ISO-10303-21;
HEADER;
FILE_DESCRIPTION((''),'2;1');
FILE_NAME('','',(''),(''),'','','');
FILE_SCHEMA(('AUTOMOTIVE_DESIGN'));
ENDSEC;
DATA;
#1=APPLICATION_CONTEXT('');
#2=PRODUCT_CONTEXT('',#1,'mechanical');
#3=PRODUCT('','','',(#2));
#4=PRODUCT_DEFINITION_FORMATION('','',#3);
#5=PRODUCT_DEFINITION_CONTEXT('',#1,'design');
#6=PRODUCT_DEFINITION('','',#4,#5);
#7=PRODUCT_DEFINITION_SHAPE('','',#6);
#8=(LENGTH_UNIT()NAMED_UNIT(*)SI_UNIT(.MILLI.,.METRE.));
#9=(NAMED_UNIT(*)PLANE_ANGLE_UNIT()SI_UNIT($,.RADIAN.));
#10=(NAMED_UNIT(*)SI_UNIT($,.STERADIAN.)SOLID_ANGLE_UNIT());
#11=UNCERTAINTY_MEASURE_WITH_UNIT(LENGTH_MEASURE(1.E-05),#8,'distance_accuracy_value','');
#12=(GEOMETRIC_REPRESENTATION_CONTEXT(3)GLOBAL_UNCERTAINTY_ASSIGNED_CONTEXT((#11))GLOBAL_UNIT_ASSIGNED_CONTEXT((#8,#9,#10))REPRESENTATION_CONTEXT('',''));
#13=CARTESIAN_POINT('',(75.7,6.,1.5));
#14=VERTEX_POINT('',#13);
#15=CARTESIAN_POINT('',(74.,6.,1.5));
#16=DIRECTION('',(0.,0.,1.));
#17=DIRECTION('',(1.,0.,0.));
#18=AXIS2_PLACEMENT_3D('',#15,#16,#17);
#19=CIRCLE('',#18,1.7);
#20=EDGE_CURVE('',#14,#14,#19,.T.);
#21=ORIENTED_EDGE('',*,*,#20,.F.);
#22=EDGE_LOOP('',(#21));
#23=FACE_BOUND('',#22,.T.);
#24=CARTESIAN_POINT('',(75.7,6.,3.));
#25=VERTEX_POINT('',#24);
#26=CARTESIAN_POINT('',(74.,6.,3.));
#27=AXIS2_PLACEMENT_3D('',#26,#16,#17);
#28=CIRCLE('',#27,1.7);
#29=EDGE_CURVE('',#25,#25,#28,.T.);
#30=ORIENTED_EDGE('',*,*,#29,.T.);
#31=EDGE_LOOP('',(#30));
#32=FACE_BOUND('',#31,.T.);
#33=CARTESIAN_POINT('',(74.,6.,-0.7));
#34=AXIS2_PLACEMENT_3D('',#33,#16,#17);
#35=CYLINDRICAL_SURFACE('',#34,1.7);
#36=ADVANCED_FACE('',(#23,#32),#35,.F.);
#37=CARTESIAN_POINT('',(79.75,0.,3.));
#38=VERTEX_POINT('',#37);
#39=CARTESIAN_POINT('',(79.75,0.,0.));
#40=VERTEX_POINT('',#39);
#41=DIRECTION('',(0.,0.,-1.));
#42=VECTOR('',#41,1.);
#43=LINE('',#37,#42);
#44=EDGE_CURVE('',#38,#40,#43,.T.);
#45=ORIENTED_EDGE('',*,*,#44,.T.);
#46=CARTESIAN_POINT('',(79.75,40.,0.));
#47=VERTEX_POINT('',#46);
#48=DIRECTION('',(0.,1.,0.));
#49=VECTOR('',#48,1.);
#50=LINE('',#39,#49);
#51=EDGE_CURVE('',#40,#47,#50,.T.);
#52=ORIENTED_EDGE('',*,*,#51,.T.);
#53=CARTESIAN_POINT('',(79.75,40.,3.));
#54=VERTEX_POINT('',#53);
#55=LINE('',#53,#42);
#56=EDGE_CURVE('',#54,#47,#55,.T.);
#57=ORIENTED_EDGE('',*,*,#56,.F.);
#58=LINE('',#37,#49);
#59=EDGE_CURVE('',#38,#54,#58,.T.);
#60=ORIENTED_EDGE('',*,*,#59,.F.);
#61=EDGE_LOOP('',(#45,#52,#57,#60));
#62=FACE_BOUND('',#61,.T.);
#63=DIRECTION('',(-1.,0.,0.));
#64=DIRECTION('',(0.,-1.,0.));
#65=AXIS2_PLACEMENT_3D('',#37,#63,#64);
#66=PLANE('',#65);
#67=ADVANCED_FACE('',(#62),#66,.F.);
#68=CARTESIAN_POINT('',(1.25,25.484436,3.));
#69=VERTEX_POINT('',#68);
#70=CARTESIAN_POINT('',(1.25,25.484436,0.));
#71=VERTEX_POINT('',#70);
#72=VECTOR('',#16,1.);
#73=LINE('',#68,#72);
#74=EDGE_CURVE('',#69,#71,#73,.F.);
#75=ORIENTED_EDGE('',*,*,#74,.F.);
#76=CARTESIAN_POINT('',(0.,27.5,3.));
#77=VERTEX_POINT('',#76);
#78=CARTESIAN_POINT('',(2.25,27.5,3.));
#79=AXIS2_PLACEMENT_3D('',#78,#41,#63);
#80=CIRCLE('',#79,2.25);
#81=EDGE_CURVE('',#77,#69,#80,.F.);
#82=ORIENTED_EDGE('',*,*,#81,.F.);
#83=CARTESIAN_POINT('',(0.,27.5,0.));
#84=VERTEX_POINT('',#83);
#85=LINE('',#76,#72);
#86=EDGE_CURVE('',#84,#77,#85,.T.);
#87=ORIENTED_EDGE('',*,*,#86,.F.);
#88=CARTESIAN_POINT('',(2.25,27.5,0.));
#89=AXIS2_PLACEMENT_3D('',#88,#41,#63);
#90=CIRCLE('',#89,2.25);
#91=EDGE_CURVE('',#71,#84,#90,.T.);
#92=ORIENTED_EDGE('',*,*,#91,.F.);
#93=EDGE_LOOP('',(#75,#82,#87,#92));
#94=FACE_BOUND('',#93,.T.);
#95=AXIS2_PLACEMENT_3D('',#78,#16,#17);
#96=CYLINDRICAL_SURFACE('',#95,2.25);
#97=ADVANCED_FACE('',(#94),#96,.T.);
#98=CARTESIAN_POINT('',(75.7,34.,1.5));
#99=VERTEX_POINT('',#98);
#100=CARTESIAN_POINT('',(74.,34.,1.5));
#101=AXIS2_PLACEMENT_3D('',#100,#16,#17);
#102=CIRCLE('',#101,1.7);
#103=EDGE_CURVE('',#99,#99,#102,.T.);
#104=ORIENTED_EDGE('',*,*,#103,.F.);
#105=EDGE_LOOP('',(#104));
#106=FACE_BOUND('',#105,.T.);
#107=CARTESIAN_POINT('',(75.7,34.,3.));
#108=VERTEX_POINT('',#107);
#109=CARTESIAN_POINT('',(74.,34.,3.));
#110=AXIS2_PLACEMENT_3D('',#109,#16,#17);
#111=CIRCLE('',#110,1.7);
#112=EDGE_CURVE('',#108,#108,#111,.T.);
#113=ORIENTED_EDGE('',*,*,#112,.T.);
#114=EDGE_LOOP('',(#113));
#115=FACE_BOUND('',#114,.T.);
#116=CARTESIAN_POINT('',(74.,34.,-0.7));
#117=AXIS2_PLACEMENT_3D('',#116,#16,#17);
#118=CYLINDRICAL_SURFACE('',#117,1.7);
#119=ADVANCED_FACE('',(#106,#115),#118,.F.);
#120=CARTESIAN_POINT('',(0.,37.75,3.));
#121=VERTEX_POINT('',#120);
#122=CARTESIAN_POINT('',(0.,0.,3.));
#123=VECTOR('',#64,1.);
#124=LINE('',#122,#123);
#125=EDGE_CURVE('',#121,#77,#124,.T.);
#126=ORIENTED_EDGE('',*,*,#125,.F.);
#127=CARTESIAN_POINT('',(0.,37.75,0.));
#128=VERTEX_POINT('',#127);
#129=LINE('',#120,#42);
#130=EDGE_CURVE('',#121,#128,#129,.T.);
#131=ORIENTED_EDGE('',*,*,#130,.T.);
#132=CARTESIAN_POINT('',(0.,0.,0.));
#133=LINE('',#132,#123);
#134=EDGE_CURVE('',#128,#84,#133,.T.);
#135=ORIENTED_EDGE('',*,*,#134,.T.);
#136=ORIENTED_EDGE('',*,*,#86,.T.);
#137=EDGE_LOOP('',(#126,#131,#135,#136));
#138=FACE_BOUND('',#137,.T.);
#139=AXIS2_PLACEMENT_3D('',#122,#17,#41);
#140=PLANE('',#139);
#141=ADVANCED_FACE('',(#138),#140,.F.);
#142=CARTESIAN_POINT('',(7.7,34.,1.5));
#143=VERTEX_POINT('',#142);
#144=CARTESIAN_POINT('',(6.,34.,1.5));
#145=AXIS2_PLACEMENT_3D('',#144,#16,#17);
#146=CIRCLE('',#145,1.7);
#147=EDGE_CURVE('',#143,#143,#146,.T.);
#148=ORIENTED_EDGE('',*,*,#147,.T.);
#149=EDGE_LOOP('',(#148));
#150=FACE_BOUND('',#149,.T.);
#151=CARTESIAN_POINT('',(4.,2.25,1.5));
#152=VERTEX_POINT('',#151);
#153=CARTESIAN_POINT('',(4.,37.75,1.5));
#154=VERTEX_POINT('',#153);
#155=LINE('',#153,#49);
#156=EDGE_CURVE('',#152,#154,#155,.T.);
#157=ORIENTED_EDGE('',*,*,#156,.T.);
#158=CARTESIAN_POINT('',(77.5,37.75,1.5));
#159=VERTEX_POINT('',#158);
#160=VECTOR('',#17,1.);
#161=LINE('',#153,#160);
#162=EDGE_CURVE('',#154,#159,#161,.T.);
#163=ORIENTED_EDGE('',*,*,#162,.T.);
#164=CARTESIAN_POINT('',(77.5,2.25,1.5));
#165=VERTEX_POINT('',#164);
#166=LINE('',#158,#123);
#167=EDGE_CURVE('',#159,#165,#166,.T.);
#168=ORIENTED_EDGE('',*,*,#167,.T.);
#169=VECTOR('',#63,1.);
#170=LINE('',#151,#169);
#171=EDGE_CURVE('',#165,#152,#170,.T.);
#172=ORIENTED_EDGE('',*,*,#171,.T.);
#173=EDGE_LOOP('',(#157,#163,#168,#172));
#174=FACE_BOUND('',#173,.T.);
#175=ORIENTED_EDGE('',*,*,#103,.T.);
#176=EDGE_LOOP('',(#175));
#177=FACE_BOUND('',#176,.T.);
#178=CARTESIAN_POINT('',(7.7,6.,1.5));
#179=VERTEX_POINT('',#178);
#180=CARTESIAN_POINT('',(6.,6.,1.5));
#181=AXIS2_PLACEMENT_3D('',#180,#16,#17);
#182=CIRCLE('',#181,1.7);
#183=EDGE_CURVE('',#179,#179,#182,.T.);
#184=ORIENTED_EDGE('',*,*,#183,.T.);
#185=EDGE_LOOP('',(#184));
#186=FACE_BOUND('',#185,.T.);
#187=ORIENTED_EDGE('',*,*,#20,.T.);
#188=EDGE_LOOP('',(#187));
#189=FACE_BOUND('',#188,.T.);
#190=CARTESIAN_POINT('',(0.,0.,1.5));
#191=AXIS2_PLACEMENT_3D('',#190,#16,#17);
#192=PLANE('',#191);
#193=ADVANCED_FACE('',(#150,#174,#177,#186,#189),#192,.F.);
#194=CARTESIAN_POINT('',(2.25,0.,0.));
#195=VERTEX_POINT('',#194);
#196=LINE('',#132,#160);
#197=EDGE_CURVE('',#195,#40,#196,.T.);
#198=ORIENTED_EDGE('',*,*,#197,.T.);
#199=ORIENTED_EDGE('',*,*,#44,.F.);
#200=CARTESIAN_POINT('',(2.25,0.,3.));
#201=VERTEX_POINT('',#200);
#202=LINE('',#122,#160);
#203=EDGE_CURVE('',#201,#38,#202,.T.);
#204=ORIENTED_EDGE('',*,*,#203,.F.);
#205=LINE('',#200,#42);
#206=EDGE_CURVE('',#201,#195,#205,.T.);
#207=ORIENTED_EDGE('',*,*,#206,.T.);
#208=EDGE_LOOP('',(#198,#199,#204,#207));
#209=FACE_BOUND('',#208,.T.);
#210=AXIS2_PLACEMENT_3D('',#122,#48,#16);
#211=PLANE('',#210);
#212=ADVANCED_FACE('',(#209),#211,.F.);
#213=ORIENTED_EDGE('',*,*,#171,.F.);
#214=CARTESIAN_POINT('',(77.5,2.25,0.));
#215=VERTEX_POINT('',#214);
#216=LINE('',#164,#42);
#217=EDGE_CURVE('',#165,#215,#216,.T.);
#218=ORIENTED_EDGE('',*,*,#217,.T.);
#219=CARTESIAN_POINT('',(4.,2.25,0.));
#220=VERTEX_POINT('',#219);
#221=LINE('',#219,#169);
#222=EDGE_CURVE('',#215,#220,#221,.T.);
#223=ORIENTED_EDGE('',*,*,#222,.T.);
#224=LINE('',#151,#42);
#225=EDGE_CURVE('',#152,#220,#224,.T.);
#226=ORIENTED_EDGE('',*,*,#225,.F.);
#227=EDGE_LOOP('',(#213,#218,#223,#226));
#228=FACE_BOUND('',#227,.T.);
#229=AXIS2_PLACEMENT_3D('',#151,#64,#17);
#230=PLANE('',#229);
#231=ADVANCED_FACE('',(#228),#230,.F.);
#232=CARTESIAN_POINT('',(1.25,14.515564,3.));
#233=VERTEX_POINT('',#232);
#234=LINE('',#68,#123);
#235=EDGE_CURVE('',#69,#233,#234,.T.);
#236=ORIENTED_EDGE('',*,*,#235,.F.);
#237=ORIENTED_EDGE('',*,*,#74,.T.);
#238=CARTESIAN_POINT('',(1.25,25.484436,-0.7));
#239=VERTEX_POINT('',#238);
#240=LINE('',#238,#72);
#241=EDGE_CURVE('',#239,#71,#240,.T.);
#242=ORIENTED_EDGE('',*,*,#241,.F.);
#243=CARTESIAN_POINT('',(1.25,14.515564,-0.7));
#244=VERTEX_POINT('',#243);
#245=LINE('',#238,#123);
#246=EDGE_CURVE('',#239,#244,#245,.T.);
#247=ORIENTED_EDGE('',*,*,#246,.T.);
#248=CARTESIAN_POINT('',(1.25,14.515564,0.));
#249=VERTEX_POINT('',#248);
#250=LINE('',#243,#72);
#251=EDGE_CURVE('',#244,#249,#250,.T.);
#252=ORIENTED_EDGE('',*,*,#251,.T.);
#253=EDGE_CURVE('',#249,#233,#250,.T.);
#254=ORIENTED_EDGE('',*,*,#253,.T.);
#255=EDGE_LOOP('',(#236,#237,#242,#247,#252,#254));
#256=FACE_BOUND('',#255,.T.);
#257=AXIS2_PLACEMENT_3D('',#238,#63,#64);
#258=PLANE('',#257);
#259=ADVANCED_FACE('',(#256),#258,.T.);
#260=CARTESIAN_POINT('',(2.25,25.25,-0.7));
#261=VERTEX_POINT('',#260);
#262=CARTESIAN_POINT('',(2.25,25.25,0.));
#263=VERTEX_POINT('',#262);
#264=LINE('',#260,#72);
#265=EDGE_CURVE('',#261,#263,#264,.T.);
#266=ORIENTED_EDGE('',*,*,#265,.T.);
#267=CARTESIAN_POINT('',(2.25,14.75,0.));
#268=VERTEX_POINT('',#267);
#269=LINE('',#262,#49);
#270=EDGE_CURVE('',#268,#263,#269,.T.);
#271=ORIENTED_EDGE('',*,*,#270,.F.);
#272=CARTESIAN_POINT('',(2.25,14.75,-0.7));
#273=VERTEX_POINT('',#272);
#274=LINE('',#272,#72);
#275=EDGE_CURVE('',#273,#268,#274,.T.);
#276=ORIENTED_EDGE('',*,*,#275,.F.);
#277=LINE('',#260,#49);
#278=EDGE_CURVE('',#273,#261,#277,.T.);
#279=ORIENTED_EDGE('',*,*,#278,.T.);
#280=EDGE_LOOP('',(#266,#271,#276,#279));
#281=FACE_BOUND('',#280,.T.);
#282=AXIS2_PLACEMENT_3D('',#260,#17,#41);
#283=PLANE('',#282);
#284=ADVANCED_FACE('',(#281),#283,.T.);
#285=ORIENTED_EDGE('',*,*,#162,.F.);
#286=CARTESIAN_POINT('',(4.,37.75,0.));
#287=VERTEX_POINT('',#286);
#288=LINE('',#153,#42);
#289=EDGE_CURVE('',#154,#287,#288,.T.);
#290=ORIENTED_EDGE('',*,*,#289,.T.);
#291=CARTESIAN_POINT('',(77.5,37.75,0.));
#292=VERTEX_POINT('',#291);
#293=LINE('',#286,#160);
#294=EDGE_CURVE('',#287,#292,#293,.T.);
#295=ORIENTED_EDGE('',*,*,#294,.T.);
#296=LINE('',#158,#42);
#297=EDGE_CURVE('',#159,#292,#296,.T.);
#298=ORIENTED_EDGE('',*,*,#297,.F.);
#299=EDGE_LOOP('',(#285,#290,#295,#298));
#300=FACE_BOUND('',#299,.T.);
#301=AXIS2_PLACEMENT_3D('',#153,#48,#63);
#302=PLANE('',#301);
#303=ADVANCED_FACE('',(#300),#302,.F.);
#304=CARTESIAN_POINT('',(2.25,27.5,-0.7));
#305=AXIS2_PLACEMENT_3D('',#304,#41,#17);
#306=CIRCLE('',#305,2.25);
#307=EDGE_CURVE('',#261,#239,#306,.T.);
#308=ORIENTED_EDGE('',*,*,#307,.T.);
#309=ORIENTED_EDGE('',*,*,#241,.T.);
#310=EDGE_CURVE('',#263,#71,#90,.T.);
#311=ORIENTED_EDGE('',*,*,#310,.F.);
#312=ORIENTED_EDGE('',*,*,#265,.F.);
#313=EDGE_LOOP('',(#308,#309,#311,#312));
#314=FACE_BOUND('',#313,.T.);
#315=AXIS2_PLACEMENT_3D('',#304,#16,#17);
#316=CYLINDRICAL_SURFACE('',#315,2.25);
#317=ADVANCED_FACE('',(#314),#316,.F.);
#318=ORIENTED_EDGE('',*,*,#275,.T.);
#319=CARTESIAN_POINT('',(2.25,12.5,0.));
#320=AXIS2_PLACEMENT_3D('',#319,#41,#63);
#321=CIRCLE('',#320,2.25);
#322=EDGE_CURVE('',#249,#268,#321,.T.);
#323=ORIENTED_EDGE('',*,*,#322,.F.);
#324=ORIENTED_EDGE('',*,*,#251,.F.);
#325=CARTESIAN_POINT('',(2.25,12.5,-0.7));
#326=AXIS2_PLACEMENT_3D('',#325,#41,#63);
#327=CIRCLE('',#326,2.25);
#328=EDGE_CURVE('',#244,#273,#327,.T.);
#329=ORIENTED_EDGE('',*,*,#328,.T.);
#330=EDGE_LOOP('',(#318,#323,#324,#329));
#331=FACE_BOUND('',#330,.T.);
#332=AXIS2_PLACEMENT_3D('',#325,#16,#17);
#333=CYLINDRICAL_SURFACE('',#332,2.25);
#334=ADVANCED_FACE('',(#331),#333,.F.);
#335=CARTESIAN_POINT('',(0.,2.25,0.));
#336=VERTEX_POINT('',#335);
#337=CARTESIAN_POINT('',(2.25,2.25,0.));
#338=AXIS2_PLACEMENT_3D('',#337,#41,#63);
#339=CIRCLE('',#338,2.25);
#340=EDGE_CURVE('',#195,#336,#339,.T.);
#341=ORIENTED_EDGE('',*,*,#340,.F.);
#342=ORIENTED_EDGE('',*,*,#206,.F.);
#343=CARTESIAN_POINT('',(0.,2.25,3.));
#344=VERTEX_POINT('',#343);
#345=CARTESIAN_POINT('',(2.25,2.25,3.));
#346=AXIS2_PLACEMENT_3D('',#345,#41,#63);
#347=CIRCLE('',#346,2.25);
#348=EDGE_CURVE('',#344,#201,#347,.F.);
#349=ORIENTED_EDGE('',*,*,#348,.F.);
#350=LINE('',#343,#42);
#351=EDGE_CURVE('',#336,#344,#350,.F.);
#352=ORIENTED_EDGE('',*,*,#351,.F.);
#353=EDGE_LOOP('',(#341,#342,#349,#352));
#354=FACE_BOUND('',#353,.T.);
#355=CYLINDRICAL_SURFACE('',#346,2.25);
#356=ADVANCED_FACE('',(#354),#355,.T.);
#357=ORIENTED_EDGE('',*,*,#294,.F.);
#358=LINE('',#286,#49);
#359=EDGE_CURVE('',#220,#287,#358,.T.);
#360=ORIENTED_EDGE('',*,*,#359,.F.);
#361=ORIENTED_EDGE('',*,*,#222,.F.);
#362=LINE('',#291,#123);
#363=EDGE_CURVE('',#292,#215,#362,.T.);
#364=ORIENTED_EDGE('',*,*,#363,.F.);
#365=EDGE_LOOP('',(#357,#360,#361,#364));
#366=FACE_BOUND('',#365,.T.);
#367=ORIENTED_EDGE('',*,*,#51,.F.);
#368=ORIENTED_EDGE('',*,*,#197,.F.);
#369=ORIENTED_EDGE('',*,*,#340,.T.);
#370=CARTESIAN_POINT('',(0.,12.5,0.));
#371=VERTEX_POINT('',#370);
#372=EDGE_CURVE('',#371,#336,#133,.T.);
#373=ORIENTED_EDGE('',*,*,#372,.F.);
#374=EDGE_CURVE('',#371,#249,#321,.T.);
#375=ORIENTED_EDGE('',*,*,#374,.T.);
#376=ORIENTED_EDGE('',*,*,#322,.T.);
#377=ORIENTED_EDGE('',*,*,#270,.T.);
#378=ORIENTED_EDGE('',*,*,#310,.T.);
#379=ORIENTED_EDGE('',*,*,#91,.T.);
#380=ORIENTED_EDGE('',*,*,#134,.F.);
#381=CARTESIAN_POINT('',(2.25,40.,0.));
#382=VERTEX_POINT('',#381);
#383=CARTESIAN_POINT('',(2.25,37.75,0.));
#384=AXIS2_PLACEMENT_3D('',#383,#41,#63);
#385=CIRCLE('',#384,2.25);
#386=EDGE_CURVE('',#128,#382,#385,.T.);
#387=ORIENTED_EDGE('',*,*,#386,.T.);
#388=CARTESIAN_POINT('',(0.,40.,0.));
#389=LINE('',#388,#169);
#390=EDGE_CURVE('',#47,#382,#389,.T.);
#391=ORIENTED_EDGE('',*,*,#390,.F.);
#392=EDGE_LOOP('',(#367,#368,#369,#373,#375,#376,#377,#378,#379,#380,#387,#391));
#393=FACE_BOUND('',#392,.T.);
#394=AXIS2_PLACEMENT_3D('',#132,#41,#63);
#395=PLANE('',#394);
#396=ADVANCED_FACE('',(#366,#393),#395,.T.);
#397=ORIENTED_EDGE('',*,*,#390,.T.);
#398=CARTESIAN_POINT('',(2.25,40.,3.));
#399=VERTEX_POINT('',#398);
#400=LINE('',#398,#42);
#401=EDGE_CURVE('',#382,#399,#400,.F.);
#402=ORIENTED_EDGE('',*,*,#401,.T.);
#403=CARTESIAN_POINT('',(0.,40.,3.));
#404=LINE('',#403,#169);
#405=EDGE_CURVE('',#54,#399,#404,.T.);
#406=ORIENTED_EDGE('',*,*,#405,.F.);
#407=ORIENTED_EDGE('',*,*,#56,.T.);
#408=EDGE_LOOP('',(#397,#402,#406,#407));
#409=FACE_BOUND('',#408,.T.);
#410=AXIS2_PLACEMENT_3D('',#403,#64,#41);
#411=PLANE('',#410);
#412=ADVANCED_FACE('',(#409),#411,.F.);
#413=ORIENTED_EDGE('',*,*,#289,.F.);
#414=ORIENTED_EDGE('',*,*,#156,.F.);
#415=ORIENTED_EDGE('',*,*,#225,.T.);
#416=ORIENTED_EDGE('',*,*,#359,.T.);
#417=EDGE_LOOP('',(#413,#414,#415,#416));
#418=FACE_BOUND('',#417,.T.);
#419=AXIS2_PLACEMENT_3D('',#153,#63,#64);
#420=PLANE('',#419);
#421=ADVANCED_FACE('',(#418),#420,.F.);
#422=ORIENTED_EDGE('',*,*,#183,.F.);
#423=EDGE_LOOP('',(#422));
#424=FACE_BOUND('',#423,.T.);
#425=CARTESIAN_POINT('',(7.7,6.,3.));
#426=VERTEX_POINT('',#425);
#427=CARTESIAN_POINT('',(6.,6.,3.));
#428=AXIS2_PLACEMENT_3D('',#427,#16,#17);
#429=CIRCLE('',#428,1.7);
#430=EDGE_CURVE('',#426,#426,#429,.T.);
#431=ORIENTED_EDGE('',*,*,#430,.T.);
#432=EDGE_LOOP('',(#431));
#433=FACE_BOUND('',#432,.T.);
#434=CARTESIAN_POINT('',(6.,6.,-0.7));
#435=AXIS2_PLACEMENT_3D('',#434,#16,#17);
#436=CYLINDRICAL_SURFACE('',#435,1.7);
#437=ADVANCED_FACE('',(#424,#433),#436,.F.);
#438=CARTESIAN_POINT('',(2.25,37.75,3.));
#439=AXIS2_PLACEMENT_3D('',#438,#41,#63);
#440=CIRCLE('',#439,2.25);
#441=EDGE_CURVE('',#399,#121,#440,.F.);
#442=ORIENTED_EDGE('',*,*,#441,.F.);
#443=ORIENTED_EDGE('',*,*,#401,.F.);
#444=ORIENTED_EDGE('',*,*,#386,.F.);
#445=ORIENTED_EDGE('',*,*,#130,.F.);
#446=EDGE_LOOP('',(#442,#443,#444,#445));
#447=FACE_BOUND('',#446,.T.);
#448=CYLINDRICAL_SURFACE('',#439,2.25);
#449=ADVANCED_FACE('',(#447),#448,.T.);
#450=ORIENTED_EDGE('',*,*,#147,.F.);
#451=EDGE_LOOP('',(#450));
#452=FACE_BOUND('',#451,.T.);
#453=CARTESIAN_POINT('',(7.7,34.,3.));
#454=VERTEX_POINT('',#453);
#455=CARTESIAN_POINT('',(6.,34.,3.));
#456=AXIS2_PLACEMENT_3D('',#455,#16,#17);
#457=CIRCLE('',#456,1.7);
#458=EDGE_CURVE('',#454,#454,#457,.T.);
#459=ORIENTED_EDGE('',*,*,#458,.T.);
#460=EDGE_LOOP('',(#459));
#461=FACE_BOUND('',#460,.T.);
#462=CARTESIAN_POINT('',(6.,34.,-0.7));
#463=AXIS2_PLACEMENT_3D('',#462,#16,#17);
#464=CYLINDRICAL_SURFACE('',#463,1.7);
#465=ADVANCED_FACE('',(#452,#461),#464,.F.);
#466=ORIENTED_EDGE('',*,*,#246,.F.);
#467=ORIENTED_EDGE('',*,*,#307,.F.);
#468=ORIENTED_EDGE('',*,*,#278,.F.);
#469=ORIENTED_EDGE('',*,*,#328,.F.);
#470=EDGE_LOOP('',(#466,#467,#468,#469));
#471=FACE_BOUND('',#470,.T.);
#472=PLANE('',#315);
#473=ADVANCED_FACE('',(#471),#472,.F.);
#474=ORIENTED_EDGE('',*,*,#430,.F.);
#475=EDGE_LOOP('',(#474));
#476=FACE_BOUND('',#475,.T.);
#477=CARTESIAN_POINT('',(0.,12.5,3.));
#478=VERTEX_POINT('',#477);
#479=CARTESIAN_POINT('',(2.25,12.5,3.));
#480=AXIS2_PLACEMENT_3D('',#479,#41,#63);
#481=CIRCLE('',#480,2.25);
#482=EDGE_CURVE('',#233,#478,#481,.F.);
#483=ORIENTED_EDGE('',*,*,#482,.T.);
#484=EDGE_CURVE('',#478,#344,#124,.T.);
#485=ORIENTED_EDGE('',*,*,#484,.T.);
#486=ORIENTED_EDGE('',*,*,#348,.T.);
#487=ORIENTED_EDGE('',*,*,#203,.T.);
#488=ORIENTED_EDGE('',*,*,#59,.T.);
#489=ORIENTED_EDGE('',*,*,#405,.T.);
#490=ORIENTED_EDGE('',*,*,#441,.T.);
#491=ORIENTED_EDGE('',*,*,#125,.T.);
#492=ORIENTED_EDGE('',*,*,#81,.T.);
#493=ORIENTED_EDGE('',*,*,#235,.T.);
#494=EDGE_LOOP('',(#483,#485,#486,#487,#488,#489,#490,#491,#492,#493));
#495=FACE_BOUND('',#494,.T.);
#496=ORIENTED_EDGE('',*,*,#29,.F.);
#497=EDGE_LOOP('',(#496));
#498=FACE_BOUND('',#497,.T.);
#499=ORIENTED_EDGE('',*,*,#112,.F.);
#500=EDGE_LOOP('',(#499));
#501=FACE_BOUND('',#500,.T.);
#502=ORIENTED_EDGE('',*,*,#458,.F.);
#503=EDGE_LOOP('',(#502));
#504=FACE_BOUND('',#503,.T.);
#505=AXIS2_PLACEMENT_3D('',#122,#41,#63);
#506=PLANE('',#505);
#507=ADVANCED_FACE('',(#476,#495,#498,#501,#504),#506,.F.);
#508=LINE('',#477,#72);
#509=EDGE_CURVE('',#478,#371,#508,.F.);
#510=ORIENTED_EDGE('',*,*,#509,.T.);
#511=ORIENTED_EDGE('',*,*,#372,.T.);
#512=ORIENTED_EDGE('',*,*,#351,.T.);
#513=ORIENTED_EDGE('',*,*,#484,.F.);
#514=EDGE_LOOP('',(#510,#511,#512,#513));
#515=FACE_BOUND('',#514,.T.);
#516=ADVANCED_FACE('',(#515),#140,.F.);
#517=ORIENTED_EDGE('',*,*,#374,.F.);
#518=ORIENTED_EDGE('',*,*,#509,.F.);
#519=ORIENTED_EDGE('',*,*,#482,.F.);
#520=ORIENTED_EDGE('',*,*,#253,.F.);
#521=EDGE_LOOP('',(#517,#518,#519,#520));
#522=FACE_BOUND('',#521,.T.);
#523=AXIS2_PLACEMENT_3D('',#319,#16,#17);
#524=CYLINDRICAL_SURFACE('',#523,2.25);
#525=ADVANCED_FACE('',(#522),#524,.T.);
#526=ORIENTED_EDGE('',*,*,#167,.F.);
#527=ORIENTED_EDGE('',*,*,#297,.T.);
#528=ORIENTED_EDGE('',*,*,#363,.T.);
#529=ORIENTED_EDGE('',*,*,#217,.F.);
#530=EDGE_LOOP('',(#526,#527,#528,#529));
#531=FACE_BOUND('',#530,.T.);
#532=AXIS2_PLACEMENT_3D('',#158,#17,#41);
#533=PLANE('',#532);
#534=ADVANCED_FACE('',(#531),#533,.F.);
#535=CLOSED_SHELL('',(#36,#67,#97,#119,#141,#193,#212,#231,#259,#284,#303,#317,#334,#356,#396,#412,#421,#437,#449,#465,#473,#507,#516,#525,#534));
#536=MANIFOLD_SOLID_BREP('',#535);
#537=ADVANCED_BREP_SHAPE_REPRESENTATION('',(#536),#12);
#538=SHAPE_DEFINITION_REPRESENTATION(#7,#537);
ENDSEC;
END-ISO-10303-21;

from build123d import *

# Parameters (mm, degrees)
SKETCH1_W           = 79.75
SKETCH1_H           = 40
BOSS_EXTRUDE1_DEPTH = 3
SKETCH2_W           = 2.25
SKETCH2_H           = 10.5
CUT_EXTRUDE1_DEPTH  = 90.26960569
FILLET2_R           = 2.25
FILLET1_R           = 2.25
BOSS_EXTRUDE4_DEPTH = 3.7
SKETCH7_W           = 73.5
SKETCH7_H           = 35.5
OLED_RECESS_DEPTH   = 1.5
SKETCH9_R           = 1.7
CUT_EXTRUDE5_DEPTH  = 90.295870565


with BuildPart() as part:
    # Sketch1 → Boss-Extrude1 (new body)
    with BuildSketch(Plane.XY):
        with Locations((39.875, 20)):
            Rectangle(SKETCH1_W, SKETCH1_H)
    extrude(amount=BOSS_EXTRUDE1_DEPTH)

    # Sketch2 → Cut-Extrude1 (cut, through all)
    with BuildSketch(Plane.XY.offset(3)):
        with Locations((1.125, 20)):
            Rectangle(SKETCH2_W, SKETCH2_H)
    extrude(amount=-CUT_EXTRUDE1_DEPTH, mode=Mode.SUBTRACT)

    # Fillet2
    fillet2_edges = [part.edges().sort_by_distance(p)[0] for p in [
        (0, 14.75, 1.5),
        (0, 25.25, 1.5),
    ]]
    fillet(fillet2_edges, radius=FILLET2_R - 0.0001)  # a hair under: the kernel refuses the full size

    # Fillet1
    fillet1_edges = [part.edges().sort_by_distance(p)[0] for p in [
        (0, 40, 1.5),
        (0, 0, 1.5),
    ]]
    fillet(fillet1_edges, radius=FILLET1_R)

    # Sketch6 → Boss-Extrude4 (add)
    with BuildSketch(Plane.XY.offset(3)):
        with BuildLine():
            Line((1.25, 25.484435563), (1.25, 14.515564437))
            ThreePointArc((1.25, 14.515564437), (1.736443763, 14.69060722), (2.25, 14.75))
            Line((2.25, 14.75), (2.25, 25.25))
            ThreePointArc((2.25, 25.25), (1.736443763, 25.30939278), (1.25, 25.484435563))
        make_face()
    extrude(amount=-BOSS_EXTRUDE4_DEPTH)

    # Sketch7 → oled-recess (cut)
    with BuildSketch(Plane(origin=(0, 0, 0), x_dir=(-1, 0, 0), z_dir=(0, 0, -1))):
        with Locations((-40.75, 20)):
            Rectangle(SKETCH7_W, SKETCH7_H)
    extrude(amount=-OLED_RECESS_DEPTH, mode=Mode.SUBTRACT)

    # Sketch9 → Cut-Extrude5 (cut, through all)
    with BuildSketch(Plane.XY.offset(3)):
        with Locations((6, 34)):
            Circle(SKETCH9_R)
        with Locations((74, 34)):
            Circle(SKETCH9_R)
        with Locations((6, 6)):
            Circle(SKETCH9_R)
        with Locations((74, 6)):
            Circle(SKETCH9_R)
    extrude(amount=-CUT_EXTRUDE5_DEPTH, mode=Mode.SUBTRACT)


solid = part.part
